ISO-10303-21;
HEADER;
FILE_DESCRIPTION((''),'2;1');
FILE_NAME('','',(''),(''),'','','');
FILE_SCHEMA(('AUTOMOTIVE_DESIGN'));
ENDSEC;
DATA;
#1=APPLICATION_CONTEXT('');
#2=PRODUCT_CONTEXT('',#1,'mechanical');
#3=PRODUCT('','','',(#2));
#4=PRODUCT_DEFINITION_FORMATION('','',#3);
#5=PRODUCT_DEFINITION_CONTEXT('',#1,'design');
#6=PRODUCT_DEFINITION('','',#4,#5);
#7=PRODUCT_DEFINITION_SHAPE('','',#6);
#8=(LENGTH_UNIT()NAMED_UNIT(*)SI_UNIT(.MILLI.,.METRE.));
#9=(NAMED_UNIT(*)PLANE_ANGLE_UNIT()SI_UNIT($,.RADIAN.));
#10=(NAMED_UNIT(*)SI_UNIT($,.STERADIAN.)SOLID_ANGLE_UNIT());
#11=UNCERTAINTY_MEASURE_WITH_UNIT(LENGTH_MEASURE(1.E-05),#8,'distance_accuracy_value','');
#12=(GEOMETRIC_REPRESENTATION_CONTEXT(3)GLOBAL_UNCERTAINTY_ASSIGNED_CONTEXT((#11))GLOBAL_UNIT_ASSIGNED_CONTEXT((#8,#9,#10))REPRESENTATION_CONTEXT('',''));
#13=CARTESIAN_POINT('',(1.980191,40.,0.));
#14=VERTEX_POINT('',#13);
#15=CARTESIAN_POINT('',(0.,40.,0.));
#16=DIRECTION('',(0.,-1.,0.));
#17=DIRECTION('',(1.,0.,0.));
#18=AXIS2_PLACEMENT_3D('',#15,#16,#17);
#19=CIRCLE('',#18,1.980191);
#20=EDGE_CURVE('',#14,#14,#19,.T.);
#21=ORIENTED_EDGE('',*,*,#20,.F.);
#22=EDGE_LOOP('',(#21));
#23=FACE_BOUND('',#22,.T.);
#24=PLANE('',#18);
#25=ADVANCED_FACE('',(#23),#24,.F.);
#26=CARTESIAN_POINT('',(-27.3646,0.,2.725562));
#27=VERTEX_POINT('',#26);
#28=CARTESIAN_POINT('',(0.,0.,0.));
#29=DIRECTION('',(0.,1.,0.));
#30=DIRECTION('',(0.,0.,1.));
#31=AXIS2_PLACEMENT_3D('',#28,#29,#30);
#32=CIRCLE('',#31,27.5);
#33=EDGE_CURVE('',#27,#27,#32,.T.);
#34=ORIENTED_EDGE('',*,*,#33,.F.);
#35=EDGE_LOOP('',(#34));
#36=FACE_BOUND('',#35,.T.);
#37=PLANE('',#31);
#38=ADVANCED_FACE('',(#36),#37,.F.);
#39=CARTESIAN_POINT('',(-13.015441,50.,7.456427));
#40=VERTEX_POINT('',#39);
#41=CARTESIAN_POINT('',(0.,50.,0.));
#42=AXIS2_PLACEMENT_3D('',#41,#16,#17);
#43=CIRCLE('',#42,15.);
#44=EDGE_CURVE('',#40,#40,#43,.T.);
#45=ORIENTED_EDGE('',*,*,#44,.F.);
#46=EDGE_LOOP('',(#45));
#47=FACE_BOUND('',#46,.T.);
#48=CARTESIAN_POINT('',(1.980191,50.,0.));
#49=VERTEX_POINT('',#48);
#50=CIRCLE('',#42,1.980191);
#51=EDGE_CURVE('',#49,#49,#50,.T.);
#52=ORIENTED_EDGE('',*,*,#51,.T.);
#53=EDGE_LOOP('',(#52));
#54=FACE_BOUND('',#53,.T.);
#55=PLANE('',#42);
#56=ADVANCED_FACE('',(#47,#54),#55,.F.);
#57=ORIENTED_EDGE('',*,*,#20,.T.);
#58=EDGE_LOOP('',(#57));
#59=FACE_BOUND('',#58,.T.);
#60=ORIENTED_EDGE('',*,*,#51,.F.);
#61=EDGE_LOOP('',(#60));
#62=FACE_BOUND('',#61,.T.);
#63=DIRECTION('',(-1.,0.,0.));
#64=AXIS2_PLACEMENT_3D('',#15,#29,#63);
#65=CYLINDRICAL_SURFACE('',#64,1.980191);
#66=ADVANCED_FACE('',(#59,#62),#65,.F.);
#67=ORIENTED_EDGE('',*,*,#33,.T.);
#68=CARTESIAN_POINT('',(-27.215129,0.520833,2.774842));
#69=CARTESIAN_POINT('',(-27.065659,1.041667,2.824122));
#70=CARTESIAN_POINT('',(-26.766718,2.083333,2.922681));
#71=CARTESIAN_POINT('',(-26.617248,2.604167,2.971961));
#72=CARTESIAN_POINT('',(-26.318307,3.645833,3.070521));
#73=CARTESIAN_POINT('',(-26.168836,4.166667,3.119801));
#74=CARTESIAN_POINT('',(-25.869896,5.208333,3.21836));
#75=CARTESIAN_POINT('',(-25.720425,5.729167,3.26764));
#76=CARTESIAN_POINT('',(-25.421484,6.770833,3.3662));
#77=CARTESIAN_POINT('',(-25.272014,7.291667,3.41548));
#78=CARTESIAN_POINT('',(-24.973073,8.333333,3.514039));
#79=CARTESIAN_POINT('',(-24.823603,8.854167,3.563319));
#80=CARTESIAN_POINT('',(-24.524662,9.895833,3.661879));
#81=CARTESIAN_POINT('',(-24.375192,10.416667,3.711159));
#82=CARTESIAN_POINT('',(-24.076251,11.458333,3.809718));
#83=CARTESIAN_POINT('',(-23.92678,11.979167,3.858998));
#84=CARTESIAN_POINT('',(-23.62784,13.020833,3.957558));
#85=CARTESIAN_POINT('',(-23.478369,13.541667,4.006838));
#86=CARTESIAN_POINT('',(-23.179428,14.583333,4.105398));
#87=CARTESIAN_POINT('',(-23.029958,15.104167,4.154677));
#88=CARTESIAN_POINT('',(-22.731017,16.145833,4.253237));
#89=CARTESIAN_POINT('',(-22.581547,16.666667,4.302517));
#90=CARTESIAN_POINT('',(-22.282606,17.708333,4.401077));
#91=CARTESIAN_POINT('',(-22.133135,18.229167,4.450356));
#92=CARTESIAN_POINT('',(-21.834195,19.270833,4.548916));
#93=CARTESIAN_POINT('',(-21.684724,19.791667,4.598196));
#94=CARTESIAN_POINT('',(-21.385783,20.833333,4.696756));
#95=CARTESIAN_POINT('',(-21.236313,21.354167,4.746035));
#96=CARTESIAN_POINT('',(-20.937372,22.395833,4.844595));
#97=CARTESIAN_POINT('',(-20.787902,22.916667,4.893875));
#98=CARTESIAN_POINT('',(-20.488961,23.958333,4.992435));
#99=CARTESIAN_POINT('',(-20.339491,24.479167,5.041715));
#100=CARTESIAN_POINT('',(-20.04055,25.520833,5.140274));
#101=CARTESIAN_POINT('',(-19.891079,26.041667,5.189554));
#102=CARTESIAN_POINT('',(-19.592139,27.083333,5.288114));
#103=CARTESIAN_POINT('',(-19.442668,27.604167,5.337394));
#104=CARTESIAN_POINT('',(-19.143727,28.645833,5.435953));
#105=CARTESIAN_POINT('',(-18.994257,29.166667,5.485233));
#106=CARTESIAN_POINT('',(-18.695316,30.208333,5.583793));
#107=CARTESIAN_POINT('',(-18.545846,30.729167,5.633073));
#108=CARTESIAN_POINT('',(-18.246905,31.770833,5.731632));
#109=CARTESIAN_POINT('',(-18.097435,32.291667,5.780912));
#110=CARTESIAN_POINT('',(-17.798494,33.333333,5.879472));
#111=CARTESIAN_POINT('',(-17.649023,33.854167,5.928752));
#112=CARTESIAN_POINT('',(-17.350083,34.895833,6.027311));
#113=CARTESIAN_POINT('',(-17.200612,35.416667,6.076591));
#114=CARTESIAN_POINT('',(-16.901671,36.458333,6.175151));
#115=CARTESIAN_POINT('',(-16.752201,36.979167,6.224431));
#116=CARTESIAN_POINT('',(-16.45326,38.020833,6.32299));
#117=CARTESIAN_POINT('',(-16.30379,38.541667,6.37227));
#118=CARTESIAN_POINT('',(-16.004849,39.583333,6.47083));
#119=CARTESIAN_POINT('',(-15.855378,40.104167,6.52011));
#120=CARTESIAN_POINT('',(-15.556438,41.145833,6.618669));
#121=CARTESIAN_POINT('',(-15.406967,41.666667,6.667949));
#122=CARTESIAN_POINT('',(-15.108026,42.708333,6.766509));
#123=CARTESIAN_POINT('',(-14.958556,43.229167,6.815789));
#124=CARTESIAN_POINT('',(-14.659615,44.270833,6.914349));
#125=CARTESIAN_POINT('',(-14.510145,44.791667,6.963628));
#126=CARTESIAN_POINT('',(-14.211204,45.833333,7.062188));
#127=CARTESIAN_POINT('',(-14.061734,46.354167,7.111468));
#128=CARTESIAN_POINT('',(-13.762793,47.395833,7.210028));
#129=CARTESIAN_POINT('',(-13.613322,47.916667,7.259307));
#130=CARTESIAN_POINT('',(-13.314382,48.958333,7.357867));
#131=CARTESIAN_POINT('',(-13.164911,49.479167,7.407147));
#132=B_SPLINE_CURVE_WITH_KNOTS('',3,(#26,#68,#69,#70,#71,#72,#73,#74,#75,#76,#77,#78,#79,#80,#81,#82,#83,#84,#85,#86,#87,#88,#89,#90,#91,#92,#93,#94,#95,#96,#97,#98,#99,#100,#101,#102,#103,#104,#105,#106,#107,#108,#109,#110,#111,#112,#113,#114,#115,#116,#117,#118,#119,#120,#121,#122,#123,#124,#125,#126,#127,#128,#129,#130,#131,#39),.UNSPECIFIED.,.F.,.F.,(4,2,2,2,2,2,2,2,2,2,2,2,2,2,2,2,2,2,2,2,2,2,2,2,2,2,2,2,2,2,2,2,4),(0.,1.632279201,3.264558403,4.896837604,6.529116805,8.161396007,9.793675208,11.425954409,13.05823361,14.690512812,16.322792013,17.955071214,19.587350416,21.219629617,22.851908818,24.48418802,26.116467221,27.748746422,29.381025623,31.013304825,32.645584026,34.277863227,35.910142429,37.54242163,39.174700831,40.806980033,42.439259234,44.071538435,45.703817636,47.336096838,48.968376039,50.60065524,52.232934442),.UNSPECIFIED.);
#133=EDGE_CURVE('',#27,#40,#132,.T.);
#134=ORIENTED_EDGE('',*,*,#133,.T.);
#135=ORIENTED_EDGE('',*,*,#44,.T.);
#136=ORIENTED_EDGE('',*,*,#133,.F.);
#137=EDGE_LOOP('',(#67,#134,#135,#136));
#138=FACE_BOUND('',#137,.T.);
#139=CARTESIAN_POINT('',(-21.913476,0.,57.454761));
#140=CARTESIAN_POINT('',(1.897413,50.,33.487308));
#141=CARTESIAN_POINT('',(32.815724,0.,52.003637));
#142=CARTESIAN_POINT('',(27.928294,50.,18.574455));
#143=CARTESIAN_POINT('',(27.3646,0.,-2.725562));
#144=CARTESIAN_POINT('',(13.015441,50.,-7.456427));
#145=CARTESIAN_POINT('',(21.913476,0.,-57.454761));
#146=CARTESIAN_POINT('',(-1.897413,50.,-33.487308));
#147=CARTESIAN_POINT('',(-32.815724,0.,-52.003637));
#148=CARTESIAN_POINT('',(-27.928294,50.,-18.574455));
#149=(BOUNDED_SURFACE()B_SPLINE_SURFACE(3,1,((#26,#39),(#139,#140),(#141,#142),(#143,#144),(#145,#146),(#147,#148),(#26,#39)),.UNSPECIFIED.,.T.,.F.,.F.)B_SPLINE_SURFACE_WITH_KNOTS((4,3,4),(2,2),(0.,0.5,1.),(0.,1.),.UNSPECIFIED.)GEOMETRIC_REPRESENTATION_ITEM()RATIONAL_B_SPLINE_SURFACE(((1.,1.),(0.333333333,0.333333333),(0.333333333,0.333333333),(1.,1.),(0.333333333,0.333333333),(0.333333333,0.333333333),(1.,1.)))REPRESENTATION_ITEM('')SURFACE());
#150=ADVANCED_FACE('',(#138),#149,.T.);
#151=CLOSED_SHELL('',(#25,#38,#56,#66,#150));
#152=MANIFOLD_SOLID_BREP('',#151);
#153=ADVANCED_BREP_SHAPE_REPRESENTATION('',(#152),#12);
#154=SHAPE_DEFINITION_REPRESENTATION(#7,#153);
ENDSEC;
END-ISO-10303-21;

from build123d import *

# Parameters (mm, degrees)
SKETCH15_R         = 1.980191
CUT_EXTRUDE1_DEPTH = 10


with BuildPart() as part:
    # Loft2: read off the stored shape, not the designer's step
    # Loft2: loft between two sections, ruled curve by curve
    loft2_from = [
        Edge.make_bspline([(-27.364599614, 0, 2.725561949), (-21.913475716, 0, 57.454761178), (32.815723513, 0, 52.003637279), (27.364599614, 0, -2.725561949), (21.913475716, 0, -57.454761178), (-32.815723513, 0, -52.003637279), (-27.364599614, 0, 2.725561949)], [0, 0, 0, 0, 0.5, 0.5, 0.5, 1, 1, 1, 1], 3, [1, 0.333333333, 0.333333333, 1, 0.333333333, 0.333333333, 1]),
    ]
    loft2_to = [
        Edge.make_bspline([(-13.015440814, 50, 7.456426786), (1.897412759, 50, 33.487308414), (27.928294387, 50, 18.574454841), (13.015440814, 50, -7.456426786), (-1.897412759, 50, -33.487308414), (-27.928294387, 50, -18.574454841), (-13.015440814, 50, 7.456426786)], [0, 0, 0, 0, 0.5, 0.5, 0.5, 1, 1, 1, 1], 3, [1, 0.333333333, 0.333333333, 1, 0.333333333, 0.333333333, 1]),
    ]
    loft2 = Solid(Shell([*[Face.make_surface_from_curves(loft2_from[k], loft2_to[k]) for k in range(1)], Face(Wire(loft2_from)), Face(Wire(loft2_to))]))
    add(loft2)

    # Sketch15 → Cut-Extrude1 (cut)
    with BuildSketch(Plane(origin=(0, 50, 0), x_dir=(-1, 0, 0), z_dir=(0, -1, 0))):
        with Locations(Location((0, 0, 0), (0, 0, 180))):
            Circle(SKETCH15_R)
    extrude(amount=CUT_EXTRUDE1_DEPTH, mode=Mode.SUBTRACT)


solid = part.part
